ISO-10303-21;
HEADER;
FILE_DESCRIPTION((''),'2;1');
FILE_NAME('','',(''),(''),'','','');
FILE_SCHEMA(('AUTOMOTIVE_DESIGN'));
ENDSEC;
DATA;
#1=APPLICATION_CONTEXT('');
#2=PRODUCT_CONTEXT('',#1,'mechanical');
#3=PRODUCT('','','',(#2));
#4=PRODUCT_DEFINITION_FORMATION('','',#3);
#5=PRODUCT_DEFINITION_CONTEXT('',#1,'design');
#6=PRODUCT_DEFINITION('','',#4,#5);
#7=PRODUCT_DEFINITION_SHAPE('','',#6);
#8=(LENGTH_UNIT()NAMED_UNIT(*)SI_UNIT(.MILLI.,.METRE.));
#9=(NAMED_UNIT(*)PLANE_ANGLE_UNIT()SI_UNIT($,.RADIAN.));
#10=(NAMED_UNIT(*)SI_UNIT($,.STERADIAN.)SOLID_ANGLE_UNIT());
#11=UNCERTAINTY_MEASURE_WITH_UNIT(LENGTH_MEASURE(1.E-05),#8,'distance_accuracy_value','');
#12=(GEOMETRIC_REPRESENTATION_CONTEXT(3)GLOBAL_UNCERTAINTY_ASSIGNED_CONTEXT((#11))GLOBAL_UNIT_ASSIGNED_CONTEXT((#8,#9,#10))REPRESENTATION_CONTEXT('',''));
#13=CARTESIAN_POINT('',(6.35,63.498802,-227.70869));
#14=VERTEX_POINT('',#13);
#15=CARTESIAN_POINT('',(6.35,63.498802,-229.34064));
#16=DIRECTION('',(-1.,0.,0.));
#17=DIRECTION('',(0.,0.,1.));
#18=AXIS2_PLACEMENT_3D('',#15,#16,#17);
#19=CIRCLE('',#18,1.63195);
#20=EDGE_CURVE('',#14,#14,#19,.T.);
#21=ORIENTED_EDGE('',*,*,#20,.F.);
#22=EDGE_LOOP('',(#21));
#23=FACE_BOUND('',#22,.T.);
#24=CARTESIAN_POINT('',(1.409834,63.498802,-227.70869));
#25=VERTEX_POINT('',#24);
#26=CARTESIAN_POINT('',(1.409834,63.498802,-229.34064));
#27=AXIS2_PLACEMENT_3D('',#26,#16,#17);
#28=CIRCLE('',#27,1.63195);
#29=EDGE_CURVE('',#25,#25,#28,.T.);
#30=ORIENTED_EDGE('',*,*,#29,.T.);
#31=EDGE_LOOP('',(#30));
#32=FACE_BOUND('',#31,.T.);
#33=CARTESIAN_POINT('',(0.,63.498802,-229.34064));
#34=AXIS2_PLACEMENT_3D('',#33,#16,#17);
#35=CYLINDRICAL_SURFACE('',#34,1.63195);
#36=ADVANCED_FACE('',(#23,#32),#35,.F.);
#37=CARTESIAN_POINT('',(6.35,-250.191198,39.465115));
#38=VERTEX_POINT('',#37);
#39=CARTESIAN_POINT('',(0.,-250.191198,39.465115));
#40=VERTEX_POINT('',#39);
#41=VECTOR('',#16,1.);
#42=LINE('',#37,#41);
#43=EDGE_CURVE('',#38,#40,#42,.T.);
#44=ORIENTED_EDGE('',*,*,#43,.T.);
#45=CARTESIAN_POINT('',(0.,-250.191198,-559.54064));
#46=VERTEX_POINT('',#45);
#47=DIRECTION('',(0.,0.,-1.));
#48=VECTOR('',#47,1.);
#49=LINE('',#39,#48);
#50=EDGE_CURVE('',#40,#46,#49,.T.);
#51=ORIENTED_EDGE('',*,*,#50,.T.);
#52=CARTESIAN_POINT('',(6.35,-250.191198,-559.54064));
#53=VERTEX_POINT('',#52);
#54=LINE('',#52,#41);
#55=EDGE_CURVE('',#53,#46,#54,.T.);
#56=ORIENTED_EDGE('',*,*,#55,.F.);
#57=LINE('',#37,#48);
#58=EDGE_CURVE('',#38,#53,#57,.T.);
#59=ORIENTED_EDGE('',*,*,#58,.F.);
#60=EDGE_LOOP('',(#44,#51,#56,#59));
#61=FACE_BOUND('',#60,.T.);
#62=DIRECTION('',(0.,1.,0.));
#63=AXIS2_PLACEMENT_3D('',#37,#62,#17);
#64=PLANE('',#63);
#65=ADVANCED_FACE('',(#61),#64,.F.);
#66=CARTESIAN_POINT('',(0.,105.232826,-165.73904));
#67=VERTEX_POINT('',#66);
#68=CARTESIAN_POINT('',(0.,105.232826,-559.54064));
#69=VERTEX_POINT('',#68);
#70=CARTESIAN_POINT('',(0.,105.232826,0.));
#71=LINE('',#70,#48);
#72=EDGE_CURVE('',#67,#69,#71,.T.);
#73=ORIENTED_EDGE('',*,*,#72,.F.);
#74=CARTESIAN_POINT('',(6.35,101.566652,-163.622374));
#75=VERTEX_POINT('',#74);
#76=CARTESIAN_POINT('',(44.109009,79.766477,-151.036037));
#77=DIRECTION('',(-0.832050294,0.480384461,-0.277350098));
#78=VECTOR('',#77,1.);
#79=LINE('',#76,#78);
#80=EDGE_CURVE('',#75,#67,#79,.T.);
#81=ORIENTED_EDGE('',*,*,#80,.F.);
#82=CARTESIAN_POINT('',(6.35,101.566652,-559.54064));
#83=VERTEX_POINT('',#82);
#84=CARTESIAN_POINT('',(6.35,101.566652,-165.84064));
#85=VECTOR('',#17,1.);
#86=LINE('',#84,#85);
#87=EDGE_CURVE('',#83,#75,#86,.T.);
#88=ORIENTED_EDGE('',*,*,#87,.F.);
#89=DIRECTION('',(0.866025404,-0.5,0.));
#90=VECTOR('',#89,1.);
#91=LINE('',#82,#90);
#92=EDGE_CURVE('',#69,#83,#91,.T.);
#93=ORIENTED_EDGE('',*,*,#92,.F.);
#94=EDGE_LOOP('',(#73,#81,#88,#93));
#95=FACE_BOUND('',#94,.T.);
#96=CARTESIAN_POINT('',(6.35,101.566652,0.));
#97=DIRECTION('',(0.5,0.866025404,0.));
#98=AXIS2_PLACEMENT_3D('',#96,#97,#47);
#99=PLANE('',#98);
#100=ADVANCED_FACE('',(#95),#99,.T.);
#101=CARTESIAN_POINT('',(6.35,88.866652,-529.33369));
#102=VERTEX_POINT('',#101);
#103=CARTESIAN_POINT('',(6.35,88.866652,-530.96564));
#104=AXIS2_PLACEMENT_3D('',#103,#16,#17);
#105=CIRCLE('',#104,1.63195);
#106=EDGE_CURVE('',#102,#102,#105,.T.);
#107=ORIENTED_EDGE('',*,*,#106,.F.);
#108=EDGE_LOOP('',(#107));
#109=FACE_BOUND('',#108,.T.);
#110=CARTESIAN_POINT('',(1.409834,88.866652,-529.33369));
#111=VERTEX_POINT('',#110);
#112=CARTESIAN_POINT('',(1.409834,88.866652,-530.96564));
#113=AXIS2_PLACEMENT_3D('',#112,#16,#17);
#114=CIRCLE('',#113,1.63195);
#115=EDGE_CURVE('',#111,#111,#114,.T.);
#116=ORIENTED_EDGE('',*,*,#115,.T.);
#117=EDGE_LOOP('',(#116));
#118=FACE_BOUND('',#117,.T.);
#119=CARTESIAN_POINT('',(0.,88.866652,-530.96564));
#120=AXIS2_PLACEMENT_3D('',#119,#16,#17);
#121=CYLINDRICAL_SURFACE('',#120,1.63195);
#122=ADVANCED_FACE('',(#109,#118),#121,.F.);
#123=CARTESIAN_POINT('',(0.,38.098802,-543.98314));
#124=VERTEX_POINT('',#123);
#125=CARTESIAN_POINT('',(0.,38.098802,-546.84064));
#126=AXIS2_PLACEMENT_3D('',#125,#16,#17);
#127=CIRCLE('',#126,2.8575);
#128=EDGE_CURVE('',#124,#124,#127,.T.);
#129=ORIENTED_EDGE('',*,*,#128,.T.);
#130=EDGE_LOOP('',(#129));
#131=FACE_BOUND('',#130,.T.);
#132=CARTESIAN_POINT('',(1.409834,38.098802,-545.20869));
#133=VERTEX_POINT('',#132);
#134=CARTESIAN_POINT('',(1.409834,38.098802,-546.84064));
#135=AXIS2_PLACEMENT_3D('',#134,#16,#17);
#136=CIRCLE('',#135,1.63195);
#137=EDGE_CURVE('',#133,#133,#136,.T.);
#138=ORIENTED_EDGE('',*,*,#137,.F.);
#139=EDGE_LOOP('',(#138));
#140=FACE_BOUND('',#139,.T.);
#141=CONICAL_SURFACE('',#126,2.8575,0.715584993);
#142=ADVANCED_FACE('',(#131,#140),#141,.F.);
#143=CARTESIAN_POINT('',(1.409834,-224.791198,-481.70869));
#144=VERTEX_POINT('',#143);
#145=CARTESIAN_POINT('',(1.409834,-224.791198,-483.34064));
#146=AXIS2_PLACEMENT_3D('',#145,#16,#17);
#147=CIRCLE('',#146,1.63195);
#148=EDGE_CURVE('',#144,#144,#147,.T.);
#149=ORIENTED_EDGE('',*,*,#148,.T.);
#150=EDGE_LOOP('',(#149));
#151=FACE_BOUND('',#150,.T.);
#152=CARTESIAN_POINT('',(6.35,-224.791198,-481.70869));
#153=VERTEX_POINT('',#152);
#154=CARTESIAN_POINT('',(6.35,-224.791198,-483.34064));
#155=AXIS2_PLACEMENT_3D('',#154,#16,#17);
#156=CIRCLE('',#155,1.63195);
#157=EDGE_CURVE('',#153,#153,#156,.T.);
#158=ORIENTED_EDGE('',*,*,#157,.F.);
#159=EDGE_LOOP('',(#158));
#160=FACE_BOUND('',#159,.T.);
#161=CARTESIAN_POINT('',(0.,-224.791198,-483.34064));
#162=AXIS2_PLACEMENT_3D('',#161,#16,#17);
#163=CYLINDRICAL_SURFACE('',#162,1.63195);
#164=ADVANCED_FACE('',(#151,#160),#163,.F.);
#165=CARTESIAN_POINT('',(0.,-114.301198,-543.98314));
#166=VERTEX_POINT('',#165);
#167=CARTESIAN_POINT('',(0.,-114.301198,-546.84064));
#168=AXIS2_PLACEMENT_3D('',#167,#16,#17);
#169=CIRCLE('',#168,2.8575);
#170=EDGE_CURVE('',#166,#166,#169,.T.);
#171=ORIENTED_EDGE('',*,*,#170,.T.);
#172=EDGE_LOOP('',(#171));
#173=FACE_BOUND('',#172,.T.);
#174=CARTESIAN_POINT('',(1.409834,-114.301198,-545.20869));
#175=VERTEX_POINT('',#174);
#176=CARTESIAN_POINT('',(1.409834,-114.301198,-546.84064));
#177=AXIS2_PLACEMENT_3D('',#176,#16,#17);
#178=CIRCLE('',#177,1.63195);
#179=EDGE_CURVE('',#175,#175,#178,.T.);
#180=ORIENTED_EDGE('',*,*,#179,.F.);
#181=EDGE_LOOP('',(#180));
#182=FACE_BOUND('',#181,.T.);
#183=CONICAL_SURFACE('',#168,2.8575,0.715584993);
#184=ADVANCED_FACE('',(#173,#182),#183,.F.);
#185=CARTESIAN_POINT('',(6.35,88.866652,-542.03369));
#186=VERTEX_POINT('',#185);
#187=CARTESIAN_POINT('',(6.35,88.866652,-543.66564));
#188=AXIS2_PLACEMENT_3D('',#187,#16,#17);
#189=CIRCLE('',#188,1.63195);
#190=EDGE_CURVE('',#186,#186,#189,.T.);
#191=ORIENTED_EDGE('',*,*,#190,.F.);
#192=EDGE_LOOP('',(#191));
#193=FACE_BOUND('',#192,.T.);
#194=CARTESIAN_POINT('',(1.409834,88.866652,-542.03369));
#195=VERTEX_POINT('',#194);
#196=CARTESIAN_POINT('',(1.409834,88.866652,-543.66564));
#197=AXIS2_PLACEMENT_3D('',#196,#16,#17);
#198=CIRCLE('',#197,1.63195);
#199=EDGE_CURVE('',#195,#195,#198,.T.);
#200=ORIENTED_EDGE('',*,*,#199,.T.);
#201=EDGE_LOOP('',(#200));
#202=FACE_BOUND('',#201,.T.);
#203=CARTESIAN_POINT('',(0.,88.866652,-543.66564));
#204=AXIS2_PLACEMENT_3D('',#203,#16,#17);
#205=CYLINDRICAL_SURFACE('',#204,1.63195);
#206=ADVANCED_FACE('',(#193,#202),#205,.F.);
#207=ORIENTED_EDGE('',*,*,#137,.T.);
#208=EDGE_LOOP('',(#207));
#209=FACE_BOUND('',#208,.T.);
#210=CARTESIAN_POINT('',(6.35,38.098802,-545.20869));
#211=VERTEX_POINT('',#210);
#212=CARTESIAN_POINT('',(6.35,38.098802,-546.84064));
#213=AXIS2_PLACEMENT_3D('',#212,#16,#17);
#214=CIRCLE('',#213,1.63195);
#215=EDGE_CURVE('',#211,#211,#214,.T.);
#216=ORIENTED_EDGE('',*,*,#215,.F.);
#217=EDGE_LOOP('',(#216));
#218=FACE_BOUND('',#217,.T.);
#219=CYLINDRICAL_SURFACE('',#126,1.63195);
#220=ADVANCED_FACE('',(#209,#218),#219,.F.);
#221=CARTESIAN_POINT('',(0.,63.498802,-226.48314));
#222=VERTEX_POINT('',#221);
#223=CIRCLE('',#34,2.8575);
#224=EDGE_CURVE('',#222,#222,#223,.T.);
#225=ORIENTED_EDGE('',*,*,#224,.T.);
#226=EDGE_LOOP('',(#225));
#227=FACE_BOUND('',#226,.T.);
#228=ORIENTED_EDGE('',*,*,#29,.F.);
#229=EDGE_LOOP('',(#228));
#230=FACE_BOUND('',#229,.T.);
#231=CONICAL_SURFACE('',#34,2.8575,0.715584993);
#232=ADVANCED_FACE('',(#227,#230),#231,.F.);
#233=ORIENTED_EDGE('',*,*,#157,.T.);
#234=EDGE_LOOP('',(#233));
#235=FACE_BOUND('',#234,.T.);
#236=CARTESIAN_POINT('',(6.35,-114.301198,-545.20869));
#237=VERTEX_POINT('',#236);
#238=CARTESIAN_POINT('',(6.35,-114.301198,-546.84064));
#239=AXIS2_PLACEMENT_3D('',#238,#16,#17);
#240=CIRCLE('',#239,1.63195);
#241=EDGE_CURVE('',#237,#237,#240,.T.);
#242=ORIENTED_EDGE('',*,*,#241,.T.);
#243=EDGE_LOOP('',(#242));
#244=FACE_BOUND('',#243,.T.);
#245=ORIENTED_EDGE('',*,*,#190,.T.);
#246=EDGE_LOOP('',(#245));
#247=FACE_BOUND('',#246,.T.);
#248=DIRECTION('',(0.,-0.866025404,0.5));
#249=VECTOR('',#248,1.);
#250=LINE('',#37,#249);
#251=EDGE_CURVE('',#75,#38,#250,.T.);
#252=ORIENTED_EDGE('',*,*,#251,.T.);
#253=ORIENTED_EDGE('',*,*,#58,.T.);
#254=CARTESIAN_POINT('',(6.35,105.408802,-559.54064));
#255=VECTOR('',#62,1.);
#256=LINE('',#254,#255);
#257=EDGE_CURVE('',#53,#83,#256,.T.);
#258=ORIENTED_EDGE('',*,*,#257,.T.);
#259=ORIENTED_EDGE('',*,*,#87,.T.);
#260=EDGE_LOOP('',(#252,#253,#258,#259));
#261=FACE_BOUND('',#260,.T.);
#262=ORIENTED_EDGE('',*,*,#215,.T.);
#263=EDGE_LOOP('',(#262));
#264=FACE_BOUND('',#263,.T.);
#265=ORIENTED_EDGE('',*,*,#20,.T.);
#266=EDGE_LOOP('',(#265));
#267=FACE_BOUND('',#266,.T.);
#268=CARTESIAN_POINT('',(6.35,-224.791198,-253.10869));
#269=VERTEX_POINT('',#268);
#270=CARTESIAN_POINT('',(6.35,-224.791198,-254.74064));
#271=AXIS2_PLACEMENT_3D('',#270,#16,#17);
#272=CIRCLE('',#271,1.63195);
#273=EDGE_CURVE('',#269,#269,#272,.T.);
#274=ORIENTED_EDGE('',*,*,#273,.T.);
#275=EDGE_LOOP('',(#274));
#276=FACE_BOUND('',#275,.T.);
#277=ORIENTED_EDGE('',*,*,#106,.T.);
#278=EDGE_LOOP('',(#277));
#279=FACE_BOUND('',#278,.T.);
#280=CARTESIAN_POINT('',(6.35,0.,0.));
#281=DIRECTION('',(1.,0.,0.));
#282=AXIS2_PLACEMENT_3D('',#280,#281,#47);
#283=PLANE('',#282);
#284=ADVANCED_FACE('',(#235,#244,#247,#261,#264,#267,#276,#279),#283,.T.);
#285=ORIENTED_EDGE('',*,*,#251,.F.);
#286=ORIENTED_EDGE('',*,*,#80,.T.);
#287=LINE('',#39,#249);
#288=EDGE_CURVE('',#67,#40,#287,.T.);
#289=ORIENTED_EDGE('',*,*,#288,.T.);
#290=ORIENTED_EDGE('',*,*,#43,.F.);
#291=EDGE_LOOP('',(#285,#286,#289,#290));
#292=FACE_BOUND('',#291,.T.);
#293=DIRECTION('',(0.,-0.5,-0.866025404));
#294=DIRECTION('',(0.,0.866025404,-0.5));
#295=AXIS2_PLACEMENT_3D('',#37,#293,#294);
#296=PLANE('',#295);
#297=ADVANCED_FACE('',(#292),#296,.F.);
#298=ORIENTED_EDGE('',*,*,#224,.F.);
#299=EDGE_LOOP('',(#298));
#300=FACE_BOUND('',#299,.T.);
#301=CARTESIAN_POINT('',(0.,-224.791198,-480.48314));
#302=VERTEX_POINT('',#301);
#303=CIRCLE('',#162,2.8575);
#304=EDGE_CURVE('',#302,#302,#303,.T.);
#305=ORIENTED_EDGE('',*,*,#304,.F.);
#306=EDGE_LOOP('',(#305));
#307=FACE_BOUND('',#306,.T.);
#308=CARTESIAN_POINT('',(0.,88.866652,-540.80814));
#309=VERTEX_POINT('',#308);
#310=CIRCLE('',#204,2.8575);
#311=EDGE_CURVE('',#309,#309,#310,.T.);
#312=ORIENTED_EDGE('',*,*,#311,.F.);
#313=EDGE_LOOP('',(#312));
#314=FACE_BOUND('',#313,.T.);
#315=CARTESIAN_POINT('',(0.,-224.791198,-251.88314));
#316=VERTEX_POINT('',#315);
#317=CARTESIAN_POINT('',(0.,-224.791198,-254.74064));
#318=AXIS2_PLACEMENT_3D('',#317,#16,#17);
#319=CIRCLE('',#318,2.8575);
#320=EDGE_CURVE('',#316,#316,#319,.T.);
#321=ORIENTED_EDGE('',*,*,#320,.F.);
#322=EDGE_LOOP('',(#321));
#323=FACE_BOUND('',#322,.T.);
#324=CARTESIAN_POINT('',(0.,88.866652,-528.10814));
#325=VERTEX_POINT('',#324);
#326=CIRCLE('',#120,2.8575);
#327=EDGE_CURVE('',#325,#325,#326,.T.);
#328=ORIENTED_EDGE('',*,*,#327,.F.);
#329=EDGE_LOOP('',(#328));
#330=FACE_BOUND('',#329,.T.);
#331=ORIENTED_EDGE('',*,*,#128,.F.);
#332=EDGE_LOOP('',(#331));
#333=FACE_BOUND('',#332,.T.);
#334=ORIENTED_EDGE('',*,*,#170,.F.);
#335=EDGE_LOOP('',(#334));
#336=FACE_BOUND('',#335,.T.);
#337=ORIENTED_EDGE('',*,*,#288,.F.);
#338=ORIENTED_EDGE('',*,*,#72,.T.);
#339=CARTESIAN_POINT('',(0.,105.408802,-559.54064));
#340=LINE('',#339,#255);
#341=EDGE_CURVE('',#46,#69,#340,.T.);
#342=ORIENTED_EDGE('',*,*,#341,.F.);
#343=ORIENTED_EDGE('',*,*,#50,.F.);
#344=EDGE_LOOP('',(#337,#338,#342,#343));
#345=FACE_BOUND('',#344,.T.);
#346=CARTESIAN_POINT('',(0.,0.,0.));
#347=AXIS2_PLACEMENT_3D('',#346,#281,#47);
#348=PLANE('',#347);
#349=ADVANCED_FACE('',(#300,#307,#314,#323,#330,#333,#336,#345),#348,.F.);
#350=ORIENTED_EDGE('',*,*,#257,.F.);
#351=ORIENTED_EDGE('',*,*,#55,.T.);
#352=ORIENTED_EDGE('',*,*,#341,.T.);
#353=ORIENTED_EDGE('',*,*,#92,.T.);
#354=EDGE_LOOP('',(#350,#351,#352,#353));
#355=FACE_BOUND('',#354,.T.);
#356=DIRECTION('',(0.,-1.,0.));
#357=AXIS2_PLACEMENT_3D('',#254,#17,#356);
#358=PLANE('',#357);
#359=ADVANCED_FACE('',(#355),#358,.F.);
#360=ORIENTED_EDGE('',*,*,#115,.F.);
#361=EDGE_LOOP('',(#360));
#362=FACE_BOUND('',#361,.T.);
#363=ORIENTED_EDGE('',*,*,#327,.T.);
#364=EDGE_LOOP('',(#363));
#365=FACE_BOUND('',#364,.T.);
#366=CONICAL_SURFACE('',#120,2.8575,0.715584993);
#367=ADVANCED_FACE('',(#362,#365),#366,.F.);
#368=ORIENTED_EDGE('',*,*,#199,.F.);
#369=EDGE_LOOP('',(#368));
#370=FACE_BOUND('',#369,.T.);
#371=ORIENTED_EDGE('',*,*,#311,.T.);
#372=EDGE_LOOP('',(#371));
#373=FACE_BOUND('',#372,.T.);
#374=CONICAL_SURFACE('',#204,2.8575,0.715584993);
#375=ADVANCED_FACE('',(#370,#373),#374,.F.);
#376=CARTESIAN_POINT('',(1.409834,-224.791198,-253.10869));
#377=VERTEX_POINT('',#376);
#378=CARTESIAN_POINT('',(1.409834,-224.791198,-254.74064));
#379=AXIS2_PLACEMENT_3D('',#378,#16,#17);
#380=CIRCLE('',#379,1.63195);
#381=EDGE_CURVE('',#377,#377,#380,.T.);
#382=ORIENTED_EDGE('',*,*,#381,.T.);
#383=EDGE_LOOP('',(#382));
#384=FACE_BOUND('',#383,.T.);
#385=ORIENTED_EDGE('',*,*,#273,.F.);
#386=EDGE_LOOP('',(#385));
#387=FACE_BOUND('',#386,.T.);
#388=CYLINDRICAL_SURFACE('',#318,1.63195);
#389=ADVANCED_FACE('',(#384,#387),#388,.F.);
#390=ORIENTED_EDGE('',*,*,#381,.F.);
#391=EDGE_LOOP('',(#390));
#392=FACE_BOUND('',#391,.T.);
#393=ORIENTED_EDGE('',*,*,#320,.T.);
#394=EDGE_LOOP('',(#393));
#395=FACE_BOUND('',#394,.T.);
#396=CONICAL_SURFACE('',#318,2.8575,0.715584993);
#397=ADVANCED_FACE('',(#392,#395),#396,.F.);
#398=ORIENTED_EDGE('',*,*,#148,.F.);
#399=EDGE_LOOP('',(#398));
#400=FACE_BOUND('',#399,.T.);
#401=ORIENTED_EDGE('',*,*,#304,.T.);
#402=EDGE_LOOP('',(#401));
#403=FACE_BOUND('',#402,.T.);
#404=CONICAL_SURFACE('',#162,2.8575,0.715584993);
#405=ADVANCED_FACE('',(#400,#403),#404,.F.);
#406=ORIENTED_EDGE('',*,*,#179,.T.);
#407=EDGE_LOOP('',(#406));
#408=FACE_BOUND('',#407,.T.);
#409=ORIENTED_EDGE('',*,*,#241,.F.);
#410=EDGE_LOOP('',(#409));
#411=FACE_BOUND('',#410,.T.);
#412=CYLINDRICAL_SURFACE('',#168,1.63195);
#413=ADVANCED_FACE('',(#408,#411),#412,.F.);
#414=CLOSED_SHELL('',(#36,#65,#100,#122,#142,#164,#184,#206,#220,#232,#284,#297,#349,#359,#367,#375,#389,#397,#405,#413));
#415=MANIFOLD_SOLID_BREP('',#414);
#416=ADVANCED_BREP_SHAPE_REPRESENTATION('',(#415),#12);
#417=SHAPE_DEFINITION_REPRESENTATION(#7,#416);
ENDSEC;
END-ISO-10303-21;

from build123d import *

# Parameters (mm, degrees)
BOSS_EXTRUDE1_DEPTH                            = 6.35
CHAMFER1_SIZE                                  = 6.6548
CHAMFER1_SIZE_2                                = 3.842150571
CSK_FOR_4_FLAT_HEAD_MACHINE_SCREW1_D           = 3.2639
CSK_FOR_4_FLAT_HEAD_MACHINE_SCREW1_CSINK_D     = 5.715
CSK_FOR_4_FLAT_HEAD_MACHINE_SCREW1_CSINK_ANGLE = 82
CSK_FOR_4_FLAT_HEAD_MACHINE_SCREW2_D           = 3.2639
CSK_FOR_4_FLAT_HEAD_MACHINE_SCREW2_CSINK_D     = 5.715
CSK_FOR_4_FLAT_HEAD_MACHINE_SCREW2_CSINK_ANGLE = 82
CSK_FOR_4_FLAT_HEAD_MACHINE_SCREW3_D           = 3.2639
CSK_FOR_4_FLAT_HEAD_MACHINE_SCREW3_CSINK_D     = 5.715
CSK_FOR_4_FLAT_HEAD_MACHINE_SCREW3_CSINK_ANGLE = 82


with BuildPart() as part:
    # Sketch1 → Boss-Extrude1 (new body)
    with BuildSketch(Plane(origin=(0, 0, 0), x_dir=(0, 0, -1), z_dir=(1, 0, 0))):
        Polygon((-39.465115344, -250.191197903), (165.84064038, 105.408802097), (559.54064038, 105.408802097), (559.54064038, -250.191197903), align=None)
    extrude(amount=BOSS_EXTRUDE1_DEPTH)

    # Chamfer1
    # the kernel refuses this chamfer: 6.6548, 3.842150571 mm, written as the material it takes off along each edge
    with BuildSketch(Plane(origin=(6.35, 105.408802097, -148.6241021), x_dir=(-0.9998132206222078, 0.019326765612699946, 0), z_dir=(0, 0, -1))) as chamfer1_piece_1:
        Polygon((CHAMFER1_SIZE * 0.999813220622, -CHAMFER1_SIZE * 0.0193267656127), (-CHAMFER1_SIZE_2 * 0.0193267656147, -CHAMFER1_SIZE_2 * 0.999813220727), (0, 0), align=None)
    extrude(amount=428.13307656, mode=Mode.SUBTRACT)

    # CSK for #4 Flat Head Machine Screw1 (through all)
    with Locations(Plane(origin=(0, 38.098802097, -546.84064038), x_dir=(0, 0, -1), z_dir=(-1, 0, 0))):
        with Locations((0, 0), (-317.5, -25.4), (0, 152.4)):
            CounterSinkHole(CSK_FOR_4_FLAT_HEAD_MACHINE_SCREW1_D / 2, CSK_FOR_4_FLAT_HEAD_MACHINE_SCREW1_CSINK_D / 2, counter_sink_angle=CSK_FOR_4_FLAT_HEAD_MACHINE_SCREW1_CSINK_ANGLE)

    # CSK for #4 Flat Head Machine Screw2 (through all)
    with Locations(Plane.ZY):
        with Locations((-543.66564038, 88.866651525), (-530.96564038, 88.866651525)):
            CounterSinkHole(CSK_FOR_4_FLAT_HEAD_MACHINE_SCREW2_D / 2, CSK_FOR_4_FLAT_HEAD_MACHINE_SCREW2_CSINK_D / 2, counter_sink_angle=CSK_FOR_4_FLAT_HEAD_MACHINE_SCREW2_CSINK_ANGLE)

    # CSK for #4 Flat Head Machine Screw3 (through all)
    with Locations(Plane(origin=(0, -224.791197903, -483.34064038), x_dir=(0, 0, -1), z_dir=(-1, 0, 0))):
        with Locations((0, 0), (-228.6, 0)):
            CounterSinkHole(CSK_FOR_4_FLAT_HEAD_MACHINE_SCREW3_D / 2, CSK_FOR_4_FLAT_HEAD_MACHINE_SCREW3_CSINK_D / 2, counter_sink_angle=CSK_FOR_4_FLAT_HEAD_MACHINE_SCREW3_CSINK_ANGLE)


solid = part.part
